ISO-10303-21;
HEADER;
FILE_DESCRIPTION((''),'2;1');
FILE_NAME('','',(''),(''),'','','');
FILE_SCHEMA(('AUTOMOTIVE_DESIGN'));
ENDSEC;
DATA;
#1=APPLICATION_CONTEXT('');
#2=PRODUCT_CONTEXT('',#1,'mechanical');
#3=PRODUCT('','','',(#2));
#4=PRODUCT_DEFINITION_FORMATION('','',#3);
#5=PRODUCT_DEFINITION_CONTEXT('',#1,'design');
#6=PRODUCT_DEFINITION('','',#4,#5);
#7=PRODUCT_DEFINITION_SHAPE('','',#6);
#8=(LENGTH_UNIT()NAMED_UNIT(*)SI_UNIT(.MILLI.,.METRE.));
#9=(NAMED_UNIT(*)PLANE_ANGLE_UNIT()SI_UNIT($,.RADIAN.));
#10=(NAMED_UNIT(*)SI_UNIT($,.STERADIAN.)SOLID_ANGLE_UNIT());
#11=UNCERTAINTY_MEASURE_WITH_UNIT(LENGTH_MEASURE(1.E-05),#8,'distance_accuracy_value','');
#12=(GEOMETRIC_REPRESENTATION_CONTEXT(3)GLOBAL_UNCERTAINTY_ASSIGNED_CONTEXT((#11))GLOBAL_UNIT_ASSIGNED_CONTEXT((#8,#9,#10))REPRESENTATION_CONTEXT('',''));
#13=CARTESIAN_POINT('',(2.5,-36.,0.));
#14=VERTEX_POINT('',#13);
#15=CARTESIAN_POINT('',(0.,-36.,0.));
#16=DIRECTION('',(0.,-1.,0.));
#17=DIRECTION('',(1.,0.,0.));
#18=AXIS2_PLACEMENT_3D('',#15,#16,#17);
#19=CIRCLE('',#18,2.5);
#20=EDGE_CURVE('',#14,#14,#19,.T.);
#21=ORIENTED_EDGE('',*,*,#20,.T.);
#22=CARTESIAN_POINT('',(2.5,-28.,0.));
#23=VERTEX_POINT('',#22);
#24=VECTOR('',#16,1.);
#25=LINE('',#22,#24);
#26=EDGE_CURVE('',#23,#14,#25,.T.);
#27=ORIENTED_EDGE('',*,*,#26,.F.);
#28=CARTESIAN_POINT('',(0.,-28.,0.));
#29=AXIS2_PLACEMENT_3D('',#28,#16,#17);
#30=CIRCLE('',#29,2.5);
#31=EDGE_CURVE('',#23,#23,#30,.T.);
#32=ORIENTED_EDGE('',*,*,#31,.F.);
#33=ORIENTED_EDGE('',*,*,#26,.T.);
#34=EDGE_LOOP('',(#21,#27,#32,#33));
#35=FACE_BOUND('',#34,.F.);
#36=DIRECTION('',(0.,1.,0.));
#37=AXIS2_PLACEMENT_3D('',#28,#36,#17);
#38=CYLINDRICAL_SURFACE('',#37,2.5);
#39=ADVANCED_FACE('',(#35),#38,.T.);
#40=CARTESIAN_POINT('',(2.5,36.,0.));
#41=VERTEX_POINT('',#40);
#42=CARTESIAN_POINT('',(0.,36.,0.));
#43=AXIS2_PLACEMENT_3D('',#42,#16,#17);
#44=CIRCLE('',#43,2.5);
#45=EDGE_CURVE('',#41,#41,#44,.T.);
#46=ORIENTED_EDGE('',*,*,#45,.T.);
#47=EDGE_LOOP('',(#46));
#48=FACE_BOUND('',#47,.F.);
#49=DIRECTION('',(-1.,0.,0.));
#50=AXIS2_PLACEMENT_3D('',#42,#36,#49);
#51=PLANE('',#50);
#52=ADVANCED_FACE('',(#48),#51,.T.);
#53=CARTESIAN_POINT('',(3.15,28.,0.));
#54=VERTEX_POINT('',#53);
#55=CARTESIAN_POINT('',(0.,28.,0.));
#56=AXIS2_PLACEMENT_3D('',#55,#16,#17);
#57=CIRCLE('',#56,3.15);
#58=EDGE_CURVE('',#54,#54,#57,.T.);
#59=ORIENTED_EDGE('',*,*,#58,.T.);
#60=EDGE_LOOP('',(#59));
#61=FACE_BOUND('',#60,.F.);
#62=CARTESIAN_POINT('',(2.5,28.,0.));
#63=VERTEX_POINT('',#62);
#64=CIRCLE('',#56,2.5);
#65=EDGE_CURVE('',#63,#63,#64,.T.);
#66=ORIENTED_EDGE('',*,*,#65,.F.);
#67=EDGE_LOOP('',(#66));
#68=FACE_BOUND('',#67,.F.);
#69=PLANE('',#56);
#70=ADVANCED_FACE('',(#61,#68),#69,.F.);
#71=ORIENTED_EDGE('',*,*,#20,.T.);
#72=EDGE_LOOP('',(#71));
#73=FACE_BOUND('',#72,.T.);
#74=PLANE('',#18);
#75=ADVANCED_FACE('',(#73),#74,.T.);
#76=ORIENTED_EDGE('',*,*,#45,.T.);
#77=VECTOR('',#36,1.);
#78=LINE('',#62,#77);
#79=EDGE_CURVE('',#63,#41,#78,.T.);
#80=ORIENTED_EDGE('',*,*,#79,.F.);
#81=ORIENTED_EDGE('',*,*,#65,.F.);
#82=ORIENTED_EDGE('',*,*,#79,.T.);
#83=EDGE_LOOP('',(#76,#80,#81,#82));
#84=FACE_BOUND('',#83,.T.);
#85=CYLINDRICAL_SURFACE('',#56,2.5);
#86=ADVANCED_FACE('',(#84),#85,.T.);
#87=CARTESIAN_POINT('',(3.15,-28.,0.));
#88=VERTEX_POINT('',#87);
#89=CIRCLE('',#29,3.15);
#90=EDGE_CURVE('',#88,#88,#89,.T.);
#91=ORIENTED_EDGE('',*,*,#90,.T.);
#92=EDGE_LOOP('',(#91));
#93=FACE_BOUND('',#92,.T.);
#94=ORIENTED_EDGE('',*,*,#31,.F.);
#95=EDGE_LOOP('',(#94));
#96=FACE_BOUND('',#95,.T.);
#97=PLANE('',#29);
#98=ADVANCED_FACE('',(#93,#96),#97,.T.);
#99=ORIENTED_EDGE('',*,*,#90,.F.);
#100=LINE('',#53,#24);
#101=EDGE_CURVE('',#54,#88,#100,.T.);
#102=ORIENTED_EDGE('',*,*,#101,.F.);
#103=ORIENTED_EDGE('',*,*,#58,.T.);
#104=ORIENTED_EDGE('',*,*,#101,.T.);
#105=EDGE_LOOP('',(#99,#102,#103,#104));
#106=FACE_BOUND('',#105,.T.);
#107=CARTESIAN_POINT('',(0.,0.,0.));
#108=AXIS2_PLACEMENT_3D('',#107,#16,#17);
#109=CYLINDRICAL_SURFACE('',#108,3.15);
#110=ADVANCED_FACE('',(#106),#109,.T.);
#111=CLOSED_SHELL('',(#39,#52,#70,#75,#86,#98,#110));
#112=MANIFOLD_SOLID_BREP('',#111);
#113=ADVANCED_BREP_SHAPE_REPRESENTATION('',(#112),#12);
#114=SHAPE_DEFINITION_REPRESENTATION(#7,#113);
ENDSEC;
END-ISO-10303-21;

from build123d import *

# Parameters (mm, degrees)
F0_R     = 3.15
F1_DEPTH = 28
F2_R     = 2.5
F3_DEPTH = 8


# Not quite as in the source:
# - a pattern or mirror of a feature is missing from the dataset's text; its kind, count and spacing are read off the source's solid


with BuildPart() as f1:
    # F0 (on Front) → F1 (new body, symmetric)
    with BuildSketch(Plane.XZ):
        Circle(F0_R)
    extrude(amount=F1_DEPTH, both=True)

    # F2 (on face) → F3 (join)
    with BuildSketch(Plane.XZ.offset(28)):
        Circle(F2_R)
    f3 = extrude(amount=F3_DEPTH)

    # F3_copies: F3 across plane
    add(f3.mirror(Plane.ZX))


solid = f1.part
